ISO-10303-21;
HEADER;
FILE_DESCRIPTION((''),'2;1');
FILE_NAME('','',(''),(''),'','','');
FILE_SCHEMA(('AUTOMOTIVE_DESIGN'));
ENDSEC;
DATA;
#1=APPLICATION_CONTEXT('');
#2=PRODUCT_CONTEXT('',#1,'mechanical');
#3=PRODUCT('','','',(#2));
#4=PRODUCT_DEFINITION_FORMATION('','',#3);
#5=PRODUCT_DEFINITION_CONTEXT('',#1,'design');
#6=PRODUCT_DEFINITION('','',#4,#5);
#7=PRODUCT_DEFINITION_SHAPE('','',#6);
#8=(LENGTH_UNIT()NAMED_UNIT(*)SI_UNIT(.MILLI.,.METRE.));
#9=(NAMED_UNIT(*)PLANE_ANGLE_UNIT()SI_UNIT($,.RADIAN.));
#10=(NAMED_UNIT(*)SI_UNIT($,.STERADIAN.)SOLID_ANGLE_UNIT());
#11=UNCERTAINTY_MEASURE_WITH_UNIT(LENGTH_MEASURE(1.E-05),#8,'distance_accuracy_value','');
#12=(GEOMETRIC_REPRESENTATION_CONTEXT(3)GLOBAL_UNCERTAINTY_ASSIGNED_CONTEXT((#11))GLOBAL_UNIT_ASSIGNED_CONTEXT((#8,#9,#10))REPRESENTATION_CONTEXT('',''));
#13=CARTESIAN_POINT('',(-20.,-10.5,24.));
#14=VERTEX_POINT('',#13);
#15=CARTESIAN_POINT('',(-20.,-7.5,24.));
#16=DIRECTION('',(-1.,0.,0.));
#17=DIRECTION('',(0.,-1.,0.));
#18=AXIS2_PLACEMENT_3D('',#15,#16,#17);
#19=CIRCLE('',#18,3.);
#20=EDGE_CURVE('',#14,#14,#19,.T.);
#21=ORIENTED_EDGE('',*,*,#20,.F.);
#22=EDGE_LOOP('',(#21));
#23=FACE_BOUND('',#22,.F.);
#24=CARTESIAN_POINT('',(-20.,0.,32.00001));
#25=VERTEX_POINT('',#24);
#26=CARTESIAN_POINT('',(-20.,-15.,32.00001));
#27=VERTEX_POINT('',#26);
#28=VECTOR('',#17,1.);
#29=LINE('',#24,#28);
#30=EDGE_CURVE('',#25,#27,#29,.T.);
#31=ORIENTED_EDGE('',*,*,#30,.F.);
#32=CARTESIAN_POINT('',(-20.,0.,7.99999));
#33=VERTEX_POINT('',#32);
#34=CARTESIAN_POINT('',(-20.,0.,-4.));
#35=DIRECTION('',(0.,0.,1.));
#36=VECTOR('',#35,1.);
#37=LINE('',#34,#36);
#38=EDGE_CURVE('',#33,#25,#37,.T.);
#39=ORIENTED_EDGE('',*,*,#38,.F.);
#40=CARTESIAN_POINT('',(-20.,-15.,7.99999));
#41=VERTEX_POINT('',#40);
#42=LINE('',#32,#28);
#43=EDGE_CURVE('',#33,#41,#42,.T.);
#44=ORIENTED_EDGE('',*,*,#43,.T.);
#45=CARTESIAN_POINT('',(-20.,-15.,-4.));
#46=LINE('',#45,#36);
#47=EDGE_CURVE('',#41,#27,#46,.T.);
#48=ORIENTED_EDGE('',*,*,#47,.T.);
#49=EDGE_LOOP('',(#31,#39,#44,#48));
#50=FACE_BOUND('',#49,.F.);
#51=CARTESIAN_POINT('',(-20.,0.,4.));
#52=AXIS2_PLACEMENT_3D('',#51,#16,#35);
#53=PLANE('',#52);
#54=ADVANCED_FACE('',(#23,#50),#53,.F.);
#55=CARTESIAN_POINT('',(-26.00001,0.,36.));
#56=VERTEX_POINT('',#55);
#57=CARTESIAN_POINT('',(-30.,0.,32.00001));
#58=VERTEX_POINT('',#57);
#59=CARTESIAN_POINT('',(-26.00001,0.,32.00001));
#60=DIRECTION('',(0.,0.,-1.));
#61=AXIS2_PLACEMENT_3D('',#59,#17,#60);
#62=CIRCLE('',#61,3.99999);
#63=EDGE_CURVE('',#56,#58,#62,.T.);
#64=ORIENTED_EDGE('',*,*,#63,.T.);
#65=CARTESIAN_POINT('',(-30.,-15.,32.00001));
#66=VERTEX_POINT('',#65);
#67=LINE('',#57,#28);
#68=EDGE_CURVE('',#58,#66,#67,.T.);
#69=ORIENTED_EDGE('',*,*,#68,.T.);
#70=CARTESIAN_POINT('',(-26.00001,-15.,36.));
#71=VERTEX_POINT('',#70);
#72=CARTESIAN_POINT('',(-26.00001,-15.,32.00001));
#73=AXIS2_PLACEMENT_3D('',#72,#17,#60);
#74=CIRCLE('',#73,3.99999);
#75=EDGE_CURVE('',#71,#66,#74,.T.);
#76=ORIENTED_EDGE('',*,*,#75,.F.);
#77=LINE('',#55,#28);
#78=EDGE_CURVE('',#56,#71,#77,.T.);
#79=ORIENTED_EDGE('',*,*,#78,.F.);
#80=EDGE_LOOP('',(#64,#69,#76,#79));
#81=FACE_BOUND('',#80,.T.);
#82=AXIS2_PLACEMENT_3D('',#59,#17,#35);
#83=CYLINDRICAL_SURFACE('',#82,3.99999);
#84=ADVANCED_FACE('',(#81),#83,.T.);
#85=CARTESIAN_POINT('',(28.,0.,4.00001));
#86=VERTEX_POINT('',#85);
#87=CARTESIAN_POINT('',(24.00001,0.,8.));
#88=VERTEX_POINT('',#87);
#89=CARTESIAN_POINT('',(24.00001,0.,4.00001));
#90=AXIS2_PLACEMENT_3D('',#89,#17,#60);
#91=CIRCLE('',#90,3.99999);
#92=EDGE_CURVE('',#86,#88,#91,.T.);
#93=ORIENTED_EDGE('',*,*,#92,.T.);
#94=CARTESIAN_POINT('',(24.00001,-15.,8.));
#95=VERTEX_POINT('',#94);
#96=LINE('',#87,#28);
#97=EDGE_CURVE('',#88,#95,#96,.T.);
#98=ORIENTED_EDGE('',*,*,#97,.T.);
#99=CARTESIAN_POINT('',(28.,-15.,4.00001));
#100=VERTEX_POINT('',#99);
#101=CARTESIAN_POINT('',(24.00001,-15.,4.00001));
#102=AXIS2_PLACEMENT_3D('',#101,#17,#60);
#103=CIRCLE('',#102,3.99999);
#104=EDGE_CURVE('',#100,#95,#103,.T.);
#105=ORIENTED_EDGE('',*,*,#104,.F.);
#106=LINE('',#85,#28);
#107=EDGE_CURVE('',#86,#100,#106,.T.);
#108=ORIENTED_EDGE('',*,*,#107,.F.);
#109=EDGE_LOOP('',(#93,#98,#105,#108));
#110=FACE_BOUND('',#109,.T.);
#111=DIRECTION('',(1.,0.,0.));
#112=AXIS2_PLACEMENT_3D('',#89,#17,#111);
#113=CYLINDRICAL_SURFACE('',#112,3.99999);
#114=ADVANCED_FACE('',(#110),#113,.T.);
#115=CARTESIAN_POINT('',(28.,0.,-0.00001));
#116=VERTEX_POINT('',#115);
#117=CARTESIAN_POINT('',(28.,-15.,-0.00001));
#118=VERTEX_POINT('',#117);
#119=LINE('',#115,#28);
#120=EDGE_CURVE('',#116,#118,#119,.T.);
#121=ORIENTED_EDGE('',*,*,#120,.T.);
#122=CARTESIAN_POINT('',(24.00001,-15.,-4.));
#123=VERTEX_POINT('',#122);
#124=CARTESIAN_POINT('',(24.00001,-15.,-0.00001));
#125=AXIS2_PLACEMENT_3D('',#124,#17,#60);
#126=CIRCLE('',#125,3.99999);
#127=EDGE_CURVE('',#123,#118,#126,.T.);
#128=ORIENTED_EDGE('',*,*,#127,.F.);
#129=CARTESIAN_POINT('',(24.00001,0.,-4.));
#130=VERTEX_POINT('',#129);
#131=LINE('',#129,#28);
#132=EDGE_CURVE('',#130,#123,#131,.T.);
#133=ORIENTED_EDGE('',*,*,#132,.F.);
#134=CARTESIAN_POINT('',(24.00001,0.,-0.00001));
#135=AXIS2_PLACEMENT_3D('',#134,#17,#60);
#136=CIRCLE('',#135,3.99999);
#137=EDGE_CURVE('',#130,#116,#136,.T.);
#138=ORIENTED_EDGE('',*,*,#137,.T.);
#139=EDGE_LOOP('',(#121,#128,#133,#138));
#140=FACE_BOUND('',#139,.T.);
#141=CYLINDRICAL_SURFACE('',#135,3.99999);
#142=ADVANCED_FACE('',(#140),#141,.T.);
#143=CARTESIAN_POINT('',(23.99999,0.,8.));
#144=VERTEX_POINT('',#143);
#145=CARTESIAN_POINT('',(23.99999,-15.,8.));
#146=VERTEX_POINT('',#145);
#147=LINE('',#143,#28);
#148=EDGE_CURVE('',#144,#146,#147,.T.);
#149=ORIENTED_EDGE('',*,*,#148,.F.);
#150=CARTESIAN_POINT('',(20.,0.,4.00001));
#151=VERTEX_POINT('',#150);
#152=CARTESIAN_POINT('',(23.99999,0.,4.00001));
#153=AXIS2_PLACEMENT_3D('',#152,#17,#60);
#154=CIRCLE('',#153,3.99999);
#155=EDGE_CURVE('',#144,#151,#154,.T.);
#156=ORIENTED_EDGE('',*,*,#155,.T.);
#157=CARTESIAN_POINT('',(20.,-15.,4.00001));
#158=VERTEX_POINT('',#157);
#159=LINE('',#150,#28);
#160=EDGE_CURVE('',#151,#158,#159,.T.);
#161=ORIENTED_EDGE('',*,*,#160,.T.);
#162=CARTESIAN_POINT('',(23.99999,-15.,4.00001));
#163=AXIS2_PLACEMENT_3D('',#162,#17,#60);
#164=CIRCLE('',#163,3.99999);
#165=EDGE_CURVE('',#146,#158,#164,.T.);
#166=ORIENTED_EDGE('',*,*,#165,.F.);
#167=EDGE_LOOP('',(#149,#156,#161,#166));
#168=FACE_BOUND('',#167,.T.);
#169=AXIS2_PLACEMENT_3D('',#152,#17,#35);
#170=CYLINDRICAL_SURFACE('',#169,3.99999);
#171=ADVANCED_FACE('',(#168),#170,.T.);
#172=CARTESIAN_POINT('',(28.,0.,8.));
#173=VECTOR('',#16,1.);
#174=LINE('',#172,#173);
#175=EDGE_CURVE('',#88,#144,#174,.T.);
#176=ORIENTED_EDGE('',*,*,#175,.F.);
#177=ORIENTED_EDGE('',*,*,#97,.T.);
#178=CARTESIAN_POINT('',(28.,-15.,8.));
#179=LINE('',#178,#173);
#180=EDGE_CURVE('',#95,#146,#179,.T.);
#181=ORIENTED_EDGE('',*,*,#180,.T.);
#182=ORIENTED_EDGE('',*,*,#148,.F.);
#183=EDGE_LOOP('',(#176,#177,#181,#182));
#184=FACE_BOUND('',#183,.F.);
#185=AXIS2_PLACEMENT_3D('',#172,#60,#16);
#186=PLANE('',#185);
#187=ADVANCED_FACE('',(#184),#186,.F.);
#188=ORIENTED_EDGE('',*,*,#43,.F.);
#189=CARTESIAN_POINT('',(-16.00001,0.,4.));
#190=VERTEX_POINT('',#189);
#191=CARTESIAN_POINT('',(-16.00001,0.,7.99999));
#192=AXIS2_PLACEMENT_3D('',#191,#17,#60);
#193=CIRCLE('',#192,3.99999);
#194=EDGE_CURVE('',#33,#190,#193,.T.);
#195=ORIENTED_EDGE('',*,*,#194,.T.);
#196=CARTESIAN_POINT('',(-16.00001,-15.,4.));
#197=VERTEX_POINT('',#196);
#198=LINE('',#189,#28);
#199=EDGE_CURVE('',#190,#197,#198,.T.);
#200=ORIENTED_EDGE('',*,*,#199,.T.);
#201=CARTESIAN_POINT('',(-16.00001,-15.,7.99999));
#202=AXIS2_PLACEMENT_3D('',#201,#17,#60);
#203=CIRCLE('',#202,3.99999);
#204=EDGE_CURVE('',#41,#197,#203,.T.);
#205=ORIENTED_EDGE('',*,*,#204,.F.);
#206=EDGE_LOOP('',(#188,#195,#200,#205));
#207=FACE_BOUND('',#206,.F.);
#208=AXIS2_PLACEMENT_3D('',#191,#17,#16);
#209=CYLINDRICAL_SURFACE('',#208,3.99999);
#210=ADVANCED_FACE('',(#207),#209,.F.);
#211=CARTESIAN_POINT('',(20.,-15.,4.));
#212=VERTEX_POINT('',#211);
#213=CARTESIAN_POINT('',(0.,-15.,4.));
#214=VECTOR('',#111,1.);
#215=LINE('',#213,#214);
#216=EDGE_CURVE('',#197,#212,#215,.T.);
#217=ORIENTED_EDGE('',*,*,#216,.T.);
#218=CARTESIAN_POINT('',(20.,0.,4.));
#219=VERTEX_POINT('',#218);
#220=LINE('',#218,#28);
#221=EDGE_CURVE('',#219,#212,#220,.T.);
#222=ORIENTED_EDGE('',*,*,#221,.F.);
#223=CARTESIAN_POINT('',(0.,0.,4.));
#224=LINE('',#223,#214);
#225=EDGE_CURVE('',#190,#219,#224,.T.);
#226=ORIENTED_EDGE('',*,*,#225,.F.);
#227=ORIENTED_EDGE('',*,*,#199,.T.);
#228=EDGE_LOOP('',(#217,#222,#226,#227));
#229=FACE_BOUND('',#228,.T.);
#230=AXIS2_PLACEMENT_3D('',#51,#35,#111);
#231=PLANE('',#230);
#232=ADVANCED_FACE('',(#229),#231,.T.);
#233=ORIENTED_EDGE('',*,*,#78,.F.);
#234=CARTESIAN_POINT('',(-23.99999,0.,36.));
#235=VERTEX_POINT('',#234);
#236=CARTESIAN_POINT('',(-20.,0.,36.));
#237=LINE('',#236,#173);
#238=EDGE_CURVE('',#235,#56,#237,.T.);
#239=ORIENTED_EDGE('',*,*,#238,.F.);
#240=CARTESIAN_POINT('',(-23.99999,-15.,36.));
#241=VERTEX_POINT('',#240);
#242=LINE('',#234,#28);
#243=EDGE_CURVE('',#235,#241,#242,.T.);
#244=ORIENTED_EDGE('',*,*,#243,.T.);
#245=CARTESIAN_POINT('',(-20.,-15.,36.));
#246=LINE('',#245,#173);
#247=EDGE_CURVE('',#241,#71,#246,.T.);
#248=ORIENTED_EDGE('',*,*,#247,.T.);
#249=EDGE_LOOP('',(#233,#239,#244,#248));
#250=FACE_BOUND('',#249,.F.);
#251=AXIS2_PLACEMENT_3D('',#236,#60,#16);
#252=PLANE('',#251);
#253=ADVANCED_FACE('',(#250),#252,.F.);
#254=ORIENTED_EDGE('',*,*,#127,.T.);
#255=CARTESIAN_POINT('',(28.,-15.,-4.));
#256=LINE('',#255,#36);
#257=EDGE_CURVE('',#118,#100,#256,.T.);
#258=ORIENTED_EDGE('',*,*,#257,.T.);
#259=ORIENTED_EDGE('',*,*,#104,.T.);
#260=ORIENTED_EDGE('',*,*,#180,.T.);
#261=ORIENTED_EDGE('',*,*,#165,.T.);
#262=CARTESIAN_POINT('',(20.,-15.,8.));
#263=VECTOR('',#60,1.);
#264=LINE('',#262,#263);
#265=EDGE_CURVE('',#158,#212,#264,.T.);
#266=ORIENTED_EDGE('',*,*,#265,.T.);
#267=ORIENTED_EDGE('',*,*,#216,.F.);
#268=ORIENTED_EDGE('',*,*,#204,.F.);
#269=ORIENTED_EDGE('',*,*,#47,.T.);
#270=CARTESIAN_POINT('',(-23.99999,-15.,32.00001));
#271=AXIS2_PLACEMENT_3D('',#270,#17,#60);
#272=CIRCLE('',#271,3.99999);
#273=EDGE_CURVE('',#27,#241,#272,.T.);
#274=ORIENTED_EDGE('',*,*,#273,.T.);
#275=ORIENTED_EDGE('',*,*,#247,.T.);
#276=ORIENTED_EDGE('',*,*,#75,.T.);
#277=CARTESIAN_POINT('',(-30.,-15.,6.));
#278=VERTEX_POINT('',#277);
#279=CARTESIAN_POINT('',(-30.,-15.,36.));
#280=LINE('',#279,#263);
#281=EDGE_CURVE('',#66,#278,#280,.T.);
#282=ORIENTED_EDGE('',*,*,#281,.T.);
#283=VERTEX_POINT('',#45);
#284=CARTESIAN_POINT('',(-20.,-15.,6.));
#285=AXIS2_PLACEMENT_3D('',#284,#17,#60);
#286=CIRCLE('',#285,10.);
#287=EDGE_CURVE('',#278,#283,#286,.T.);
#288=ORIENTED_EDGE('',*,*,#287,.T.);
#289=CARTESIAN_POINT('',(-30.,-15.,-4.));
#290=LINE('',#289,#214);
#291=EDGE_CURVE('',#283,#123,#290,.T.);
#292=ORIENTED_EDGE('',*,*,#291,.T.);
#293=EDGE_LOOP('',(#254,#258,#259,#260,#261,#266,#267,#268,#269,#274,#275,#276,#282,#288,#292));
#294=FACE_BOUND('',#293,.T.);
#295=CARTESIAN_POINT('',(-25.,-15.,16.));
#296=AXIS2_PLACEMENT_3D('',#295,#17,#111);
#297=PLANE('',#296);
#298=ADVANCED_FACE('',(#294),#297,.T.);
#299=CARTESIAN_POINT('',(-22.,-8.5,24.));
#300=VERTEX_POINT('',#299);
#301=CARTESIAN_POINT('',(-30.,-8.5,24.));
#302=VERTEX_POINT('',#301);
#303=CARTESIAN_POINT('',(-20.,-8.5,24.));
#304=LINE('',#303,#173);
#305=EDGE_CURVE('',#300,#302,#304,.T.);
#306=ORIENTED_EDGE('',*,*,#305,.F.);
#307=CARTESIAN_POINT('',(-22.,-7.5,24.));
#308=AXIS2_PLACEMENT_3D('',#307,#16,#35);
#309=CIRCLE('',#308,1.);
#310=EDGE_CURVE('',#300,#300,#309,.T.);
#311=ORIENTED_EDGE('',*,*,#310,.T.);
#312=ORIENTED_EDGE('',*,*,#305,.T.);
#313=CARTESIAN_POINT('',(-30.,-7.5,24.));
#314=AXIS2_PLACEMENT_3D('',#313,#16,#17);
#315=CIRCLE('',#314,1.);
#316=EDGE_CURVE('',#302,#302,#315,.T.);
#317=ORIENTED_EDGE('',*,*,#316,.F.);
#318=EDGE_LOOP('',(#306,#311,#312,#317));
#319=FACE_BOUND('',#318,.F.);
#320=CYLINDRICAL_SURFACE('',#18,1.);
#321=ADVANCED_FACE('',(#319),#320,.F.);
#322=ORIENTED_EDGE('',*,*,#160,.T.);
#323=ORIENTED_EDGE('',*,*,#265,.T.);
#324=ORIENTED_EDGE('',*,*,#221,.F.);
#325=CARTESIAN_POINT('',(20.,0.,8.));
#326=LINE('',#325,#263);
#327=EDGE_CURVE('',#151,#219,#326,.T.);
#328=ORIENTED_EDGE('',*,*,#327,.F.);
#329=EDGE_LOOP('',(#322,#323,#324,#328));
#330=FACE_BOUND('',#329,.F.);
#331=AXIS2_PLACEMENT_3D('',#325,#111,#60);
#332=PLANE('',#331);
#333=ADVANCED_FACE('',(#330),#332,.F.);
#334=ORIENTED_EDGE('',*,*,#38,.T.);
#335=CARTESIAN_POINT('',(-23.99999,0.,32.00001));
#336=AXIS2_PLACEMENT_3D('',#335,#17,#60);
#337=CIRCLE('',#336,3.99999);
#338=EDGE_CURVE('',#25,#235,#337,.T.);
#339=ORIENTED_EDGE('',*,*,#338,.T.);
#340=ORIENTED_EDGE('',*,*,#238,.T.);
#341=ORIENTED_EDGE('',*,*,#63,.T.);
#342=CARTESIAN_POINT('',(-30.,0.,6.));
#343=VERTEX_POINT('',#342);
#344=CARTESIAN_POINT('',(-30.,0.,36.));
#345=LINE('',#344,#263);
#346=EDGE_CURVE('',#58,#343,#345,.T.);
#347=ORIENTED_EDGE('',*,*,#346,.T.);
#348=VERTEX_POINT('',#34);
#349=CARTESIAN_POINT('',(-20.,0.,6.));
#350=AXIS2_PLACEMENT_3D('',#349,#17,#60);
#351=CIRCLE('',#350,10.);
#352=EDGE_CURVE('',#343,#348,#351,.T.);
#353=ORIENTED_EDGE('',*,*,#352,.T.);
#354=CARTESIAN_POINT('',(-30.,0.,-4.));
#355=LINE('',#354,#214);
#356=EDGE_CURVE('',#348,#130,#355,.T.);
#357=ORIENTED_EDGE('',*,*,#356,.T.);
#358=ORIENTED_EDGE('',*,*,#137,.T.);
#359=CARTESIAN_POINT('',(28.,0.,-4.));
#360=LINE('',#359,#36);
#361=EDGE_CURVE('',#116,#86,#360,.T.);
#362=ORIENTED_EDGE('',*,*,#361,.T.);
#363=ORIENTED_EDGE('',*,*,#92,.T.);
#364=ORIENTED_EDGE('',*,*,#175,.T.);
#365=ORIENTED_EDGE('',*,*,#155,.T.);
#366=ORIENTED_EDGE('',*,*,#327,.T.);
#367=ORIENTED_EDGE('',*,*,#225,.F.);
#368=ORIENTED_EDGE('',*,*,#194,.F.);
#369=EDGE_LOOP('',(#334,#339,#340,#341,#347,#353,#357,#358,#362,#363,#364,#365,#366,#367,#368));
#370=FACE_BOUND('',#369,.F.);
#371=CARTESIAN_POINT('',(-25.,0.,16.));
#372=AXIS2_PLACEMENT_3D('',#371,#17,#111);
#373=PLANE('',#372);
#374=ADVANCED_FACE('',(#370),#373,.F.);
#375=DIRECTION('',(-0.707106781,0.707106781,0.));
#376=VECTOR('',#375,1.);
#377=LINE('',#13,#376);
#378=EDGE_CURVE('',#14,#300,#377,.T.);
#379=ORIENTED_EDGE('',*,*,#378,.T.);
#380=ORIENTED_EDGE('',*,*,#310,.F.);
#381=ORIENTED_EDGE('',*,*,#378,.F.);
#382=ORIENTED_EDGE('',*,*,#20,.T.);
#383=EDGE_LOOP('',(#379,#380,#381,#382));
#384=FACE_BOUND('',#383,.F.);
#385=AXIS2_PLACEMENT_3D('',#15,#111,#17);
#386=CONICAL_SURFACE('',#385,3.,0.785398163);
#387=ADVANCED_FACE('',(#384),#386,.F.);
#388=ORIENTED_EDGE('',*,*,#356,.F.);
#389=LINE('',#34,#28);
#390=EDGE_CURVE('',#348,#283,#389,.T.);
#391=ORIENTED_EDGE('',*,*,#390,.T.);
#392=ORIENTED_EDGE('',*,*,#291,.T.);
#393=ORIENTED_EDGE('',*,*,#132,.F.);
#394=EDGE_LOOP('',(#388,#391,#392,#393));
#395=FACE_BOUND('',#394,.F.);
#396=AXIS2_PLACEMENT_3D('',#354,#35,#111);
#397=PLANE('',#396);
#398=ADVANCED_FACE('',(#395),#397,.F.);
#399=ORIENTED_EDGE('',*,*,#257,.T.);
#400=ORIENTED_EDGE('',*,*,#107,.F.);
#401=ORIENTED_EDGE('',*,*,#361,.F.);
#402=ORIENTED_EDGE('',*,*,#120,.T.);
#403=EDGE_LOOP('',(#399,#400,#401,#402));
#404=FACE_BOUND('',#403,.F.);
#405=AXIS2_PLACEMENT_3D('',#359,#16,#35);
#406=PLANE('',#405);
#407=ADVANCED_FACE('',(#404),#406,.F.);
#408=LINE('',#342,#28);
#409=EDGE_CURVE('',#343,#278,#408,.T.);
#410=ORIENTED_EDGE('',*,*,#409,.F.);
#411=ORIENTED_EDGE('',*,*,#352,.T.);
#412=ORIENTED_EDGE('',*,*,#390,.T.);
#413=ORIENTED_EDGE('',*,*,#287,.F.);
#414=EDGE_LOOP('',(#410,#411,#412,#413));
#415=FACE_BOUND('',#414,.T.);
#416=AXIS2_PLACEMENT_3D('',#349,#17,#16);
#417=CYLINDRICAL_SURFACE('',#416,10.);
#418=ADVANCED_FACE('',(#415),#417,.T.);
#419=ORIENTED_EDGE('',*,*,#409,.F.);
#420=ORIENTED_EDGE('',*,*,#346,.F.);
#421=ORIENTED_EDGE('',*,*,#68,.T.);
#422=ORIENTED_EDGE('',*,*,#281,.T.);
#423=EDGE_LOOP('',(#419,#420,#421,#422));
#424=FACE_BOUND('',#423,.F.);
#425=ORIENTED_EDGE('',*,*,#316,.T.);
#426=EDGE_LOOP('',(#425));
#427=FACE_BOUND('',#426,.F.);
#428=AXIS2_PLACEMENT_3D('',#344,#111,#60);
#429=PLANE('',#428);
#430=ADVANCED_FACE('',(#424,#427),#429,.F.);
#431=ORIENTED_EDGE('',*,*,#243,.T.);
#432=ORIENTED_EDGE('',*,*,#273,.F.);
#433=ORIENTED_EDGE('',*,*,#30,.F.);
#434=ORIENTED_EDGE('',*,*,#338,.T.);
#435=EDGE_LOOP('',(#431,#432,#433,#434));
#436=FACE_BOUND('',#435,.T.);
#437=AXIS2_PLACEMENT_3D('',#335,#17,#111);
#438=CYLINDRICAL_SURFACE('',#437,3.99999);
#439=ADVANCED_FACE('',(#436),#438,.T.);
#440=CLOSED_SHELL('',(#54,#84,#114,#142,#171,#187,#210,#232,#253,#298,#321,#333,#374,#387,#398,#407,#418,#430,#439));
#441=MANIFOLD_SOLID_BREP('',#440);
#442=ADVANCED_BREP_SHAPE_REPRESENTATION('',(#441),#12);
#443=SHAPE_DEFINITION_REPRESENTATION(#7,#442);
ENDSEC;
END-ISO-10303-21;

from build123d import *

# Parameters (mm, degrees)
F0_W           = 40
F0_H           = 8
F1_DEPTH       = 15
F2_R           = 3.99999
F3_R           = 10
F5_D           = 2
F5_CSINK_D     = 6
F5_CSINK_ANGLE = 90


# Not quite as in the source:
# - a fillet or chamfer is up to 0.001 mm smaller than in the source, because OpenCascade refuses the exact size


with BuildPart() as f1:
    # F0 (on Front) → F1 (new body)
    with BuildSketch(Plane.XZ):
        Polygon((-20, -4), (-20, 4), (-20, 36), (-30, 36), (-30, -4), align=None)
        Rectangle(F0_W, F0_H)
        Polygon((20, 8), (20, 4), (20, -4), (28, -4), (28, 8), align=None)
    extrude(amount=F1_DEPTH)

    # F2 (radius 4 in the source; OpenCascade refuses exactly that, so slightly less here)
    f2_edges = [f1.edges().sort_by_distance(p)[0] for p in [
        (-20, -7.5, 4),
        (20, -7.5, 8),
        (28, -7.5, 8),
        (28, -7.5, -4),
        (-20, -7.5, 36),
        (-30, -7.5, 36),
    ]]
    fillet(f2_edges, radius=F2_R)

    # F3
    f3_edges = [f1.edges().sort_by_distance(p)[0] for p in [
        (-30, -7.5, -4),
    ]]
    fillet(f3_edges, radius=F3_R)

    # F5 (through all)
    with Locations(Plane.YZ.offset(-20)):
        with Locations((-7.5, 24)):
            CounterSinkHole(F5_D / 2, F5_CSINK_D / 2, counter_sink_angle=F5_CSINK_ANGLE)


solid = f1.part
